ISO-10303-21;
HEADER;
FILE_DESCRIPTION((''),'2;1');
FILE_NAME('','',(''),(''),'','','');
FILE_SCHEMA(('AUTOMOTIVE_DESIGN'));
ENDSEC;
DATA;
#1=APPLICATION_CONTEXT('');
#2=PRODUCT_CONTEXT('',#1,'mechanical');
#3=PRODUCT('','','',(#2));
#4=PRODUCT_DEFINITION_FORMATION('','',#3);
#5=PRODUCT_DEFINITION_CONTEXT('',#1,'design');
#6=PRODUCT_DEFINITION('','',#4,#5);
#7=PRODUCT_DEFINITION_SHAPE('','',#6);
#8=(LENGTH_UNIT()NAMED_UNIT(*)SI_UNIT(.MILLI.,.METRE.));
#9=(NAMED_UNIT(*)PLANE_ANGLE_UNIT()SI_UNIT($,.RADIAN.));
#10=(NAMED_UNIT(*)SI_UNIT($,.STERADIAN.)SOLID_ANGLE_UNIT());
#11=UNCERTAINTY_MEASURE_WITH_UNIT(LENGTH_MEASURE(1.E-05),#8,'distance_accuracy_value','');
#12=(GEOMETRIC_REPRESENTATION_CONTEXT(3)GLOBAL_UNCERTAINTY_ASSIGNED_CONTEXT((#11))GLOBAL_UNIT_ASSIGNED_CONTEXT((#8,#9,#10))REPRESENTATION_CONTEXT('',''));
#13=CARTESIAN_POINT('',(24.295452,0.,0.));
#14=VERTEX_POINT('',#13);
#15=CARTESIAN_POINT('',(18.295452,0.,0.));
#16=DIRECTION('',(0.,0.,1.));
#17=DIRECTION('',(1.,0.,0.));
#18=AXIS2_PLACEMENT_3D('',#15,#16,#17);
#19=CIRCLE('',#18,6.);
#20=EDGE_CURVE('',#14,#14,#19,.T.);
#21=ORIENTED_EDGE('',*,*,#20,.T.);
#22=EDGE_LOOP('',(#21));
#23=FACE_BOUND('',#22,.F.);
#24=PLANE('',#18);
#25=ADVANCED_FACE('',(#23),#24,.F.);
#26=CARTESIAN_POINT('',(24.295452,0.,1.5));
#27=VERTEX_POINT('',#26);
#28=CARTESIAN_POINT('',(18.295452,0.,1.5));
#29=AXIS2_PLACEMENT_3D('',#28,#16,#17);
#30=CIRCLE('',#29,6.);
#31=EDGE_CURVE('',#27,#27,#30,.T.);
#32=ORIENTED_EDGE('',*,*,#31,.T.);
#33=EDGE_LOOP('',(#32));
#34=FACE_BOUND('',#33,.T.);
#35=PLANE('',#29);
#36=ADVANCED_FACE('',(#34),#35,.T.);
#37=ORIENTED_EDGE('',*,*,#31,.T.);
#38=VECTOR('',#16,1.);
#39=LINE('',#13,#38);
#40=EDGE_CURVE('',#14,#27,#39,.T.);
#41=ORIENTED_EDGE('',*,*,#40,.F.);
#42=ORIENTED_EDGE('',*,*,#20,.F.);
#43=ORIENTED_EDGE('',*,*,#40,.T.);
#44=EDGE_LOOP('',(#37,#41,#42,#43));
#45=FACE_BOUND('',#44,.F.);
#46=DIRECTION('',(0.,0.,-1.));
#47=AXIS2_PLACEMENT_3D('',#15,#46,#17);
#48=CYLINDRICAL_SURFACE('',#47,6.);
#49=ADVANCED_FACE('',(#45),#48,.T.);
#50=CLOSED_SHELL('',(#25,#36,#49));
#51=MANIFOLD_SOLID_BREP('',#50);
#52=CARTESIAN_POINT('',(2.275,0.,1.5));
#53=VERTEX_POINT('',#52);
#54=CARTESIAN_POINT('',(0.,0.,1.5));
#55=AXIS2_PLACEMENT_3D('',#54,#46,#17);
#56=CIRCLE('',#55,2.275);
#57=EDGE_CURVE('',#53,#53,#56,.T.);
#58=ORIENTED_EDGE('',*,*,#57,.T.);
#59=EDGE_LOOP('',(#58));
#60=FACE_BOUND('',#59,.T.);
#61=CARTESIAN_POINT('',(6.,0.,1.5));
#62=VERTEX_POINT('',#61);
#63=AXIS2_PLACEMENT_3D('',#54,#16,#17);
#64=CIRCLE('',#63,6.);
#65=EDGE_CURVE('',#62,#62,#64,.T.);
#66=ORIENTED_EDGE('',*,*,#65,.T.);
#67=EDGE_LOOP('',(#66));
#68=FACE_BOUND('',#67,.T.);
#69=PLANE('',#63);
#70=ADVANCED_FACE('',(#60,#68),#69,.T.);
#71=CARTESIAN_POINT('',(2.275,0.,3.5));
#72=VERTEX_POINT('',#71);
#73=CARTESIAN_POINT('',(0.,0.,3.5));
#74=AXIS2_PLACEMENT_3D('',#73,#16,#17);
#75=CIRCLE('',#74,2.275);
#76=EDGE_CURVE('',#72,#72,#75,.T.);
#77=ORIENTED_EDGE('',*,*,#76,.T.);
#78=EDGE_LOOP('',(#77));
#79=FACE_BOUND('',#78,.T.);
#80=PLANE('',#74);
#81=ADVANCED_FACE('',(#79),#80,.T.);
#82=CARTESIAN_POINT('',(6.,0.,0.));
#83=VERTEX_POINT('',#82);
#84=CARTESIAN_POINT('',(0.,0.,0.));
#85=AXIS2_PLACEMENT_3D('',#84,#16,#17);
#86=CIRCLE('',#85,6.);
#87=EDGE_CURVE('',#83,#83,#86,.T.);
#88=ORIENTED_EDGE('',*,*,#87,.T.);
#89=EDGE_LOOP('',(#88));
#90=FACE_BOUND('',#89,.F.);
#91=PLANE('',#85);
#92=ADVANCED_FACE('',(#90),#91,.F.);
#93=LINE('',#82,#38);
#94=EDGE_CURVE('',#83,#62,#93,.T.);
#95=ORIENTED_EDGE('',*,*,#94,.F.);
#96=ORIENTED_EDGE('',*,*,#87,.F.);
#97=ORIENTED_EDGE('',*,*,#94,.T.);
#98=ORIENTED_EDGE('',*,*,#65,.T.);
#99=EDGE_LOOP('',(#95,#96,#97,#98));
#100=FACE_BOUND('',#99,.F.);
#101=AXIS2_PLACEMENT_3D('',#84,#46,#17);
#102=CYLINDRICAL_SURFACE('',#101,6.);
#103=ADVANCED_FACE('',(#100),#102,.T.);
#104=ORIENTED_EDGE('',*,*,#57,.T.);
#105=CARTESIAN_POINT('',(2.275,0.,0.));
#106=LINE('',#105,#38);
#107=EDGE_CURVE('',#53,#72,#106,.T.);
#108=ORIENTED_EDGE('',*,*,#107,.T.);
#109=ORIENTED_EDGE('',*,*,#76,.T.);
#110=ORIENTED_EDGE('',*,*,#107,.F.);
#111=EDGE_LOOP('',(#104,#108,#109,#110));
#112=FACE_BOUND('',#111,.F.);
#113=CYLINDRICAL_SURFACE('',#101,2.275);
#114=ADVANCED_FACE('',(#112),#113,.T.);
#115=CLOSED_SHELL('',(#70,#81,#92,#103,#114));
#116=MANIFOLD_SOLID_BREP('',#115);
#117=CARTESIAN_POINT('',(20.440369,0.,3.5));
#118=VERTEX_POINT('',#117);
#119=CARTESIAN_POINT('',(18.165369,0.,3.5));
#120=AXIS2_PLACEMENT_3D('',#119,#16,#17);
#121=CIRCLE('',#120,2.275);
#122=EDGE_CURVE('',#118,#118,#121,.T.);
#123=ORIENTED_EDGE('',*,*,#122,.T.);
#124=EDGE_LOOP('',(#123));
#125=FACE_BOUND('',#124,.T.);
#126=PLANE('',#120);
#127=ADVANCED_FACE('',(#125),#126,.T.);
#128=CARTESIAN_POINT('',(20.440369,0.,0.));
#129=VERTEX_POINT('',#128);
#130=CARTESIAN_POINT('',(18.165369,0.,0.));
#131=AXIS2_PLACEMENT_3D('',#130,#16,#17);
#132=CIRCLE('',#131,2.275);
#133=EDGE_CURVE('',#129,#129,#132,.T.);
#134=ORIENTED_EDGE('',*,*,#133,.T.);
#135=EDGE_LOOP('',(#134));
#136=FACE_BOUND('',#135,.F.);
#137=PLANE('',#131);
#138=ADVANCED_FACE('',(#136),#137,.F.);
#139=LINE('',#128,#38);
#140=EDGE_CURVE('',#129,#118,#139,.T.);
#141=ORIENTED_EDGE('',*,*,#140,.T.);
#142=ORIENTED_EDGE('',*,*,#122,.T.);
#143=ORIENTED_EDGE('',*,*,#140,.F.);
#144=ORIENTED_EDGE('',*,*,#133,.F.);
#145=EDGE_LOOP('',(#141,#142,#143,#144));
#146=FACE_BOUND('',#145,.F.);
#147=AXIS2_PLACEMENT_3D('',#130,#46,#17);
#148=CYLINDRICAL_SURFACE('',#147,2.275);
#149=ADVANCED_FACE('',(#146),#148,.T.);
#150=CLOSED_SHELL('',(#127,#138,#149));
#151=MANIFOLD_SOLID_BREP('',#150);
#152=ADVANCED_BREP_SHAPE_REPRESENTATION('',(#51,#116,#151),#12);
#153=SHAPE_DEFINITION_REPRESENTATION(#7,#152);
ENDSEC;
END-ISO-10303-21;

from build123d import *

# Parameters (mm, degrees)
F0_R     = 6
F1_DEPTH = 1.5
F2_R     = 2.275
F3_DEPTH = 3.5


with BuildPart() as f1:
    # F0 (on Top) → F1 (new body)
    with BuildSketch(Plane.XY):
        Circle(F0_R)
    extrude(amount=F1_DEPTH)

    # F2 (on Top) → F3 (join)
    with BuildSketch(Plane.XY):
        Circle(F2_R)
    extrude(amount=F3_DEPTH)


with BuildPart() as f1b:
    # F0 (on Top) → F1, piece 2 (new body)
    with BuildSketch(Plane.XY):
        with Locations((18.2954519987, 0)):
            Circle(F0_R)
    extrude(amount=F1_DEPTH)


with BuildPart() as f3:
    # F2 (on Top) → F3, piece 2 (new body)
    with BuildSketch(Plane.XY):
        with Locations((18.1653685868, 0)):
            Circle(F2_R)
    extrude(amount=F3_DEPTH)


solid = Compound([f1.part, f1b.part, f3.part])
